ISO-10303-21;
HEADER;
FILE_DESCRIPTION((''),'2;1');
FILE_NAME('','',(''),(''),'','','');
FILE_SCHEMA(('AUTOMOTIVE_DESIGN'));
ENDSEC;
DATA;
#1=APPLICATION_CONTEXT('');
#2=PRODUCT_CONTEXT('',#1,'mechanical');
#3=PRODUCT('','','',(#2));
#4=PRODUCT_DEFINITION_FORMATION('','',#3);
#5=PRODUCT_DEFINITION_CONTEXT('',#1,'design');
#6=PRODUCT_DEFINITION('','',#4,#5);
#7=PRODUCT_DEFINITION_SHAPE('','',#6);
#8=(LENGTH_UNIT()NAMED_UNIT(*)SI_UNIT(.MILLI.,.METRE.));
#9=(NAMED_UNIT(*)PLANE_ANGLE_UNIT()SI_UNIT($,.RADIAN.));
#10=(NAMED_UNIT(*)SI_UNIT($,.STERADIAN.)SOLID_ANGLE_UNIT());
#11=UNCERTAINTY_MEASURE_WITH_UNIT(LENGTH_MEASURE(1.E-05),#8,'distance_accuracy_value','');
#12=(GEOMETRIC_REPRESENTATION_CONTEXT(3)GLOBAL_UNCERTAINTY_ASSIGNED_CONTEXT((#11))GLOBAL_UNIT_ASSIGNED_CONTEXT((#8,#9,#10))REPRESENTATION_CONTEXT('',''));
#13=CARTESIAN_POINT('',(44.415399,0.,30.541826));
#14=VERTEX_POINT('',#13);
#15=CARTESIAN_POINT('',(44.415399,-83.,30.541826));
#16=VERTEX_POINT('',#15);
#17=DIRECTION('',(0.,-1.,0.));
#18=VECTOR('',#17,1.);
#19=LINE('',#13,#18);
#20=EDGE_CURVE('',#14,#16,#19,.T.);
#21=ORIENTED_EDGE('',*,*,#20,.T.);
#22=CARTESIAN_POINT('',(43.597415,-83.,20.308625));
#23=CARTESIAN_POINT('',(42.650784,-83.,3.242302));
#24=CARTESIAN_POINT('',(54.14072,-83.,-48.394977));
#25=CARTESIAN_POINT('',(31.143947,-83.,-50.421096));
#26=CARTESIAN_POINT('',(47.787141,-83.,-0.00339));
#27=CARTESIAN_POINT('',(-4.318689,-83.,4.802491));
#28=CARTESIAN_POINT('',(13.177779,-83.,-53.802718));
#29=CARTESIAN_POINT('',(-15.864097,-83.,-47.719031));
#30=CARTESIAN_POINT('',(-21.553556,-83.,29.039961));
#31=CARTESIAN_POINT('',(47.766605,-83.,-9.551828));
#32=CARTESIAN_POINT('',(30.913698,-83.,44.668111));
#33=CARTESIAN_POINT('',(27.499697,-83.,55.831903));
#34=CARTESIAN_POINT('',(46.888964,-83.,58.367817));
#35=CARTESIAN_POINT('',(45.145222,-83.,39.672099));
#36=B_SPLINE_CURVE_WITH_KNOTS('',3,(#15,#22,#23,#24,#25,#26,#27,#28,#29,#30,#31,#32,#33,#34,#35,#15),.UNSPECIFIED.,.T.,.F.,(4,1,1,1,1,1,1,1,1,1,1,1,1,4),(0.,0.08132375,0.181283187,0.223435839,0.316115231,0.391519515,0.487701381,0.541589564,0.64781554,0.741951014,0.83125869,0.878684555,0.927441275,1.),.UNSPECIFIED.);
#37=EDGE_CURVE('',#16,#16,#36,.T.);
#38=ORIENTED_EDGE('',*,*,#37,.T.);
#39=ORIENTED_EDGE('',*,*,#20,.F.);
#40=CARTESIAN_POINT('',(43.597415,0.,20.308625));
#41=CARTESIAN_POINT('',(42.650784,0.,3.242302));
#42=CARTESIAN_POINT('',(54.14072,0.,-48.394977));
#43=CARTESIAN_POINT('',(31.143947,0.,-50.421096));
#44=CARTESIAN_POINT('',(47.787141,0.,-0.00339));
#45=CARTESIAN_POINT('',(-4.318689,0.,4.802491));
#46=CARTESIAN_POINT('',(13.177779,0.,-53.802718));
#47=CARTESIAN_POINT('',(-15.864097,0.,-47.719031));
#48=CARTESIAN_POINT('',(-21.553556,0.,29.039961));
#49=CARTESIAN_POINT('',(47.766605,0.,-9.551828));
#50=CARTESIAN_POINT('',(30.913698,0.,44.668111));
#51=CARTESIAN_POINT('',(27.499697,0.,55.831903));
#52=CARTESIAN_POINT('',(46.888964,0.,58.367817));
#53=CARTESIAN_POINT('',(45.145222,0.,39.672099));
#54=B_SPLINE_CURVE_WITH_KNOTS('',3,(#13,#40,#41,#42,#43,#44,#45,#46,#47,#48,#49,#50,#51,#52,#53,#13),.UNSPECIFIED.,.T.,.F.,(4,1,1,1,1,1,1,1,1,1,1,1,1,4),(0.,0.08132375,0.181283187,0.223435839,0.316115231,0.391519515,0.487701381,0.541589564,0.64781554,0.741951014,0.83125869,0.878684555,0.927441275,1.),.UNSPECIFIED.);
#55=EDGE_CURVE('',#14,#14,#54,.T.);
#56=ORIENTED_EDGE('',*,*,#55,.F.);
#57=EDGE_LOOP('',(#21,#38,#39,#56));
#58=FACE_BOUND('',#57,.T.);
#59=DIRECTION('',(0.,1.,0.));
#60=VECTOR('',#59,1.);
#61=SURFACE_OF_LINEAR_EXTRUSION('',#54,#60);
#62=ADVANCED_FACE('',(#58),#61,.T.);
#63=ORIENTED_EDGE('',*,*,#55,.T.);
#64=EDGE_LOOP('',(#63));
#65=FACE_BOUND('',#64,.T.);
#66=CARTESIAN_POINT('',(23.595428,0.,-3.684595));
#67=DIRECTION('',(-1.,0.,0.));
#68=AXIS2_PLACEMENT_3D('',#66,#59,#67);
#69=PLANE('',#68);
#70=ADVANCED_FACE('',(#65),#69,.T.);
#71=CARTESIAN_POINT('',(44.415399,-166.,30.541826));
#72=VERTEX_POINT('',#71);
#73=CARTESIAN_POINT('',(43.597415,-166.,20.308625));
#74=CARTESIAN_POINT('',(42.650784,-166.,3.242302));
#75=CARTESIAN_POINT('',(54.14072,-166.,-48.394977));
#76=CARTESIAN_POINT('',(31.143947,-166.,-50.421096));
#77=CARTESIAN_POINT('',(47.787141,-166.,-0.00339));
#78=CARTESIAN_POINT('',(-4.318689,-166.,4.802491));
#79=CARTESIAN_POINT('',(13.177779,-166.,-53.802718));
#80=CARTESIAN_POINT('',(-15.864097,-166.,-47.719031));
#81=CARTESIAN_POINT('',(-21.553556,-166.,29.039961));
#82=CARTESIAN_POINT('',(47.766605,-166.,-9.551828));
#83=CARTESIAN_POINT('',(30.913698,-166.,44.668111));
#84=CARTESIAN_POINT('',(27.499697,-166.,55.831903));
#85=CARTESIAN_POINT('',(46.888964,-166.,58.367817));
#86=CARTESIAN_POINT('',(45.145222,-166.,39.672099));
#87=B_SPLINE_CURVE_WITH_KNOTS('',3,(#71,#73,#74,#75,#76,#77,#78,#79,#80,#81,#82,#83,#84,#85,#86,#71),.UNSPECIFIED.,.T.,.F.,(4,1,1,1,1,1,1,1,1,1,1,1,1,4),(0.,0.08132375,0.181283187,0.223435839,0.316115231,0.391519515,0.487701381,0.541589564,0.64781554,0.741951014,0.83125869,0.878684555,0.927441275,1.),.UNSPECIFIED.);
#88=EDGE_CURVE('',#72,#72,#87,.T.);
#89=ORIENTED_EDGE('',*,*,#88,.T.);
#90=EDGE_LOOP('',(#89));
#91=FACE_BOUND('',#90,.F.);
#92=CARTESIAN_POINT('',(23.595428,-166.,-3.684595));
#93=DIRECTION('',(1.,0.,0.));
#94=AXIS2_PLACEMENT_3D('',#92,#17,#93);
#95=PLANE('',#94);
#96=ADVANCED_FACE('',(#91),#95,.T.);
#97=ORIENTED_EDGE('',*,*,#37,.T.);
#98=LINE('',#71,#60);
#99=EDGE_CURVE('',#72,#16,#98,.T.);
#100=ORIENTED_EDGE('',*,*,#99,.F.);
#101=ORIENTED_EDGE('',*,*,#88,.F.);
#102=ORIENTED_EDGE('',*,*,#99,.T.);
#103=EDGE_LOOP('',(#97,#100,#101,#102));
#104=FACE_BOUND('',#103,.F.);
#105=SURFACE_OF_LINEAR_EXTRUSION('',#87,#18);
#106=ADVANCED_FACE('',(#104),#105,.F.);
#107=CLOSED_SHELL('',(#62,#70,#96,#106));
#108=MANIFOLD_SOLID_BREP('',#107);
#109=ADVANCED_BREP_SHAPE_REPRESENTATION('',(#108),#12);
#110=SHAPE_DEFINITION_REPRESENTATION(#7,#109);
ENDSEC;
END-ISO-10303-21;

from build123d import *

# Parameters (mm, degrees)
F1_DEPTH = 83


# Not quite as in the source:
# - a feature of the source that left no trace in its solid (it failed there, or was rolled back) is left out
# - the program builds the solid bodies; features that only make, move or delete a surface that nothing else refers to are left out


with BuildPart() as f1:
    # F0 (on Front) → F1 (new body)
    with BuildSketch(Plane.XZ):
        with BuildLine():
            add(Edge.make_bspline(
                [(44.4153994322, 30.5418260396), (43.5974151636, 20.3086251278), (42.6507840735, 3.2423018665), (54.1407203443, -48.3949771722), (31.1439468171, -50.4210964492), (47.787140915, -0.0033898874), (-4.3186889453, 4.8024910331), (13.1777786352, -53.8027179188), (-15.8640972232, -47.7190308224), (-21.5535556267, 29.0399609787), (47.7666049841, -9.5518281776), (30.9136982282, 44.668110771), (27.499697264, 55.8319029277), (46.8889643292, 58.3678169333), (45.1452218553, 39.6720987999), (44.4153994322, 30.5418260396)],
                knots=[0, 0, 0, 0, 0.0813237495, 0.1812831869, 0.2234358388, 0.3161152306, 0.3915195151, 0.4877013808, 0.541589564, 0.6478155404, 0.7419510137, 0.8312586897, 0.8786845551, 0.9274412746, 1, 1, 1, 1], degree=3))
        make_face()
    extrude(amount=F1_DEPTH)

    # F5: F1 across plane


with BuildPart() as f1_1:
    add(f1.part)
    add(f1.part.mirror(Plane.XZ.offset(83)))


solid = f1_1.part
